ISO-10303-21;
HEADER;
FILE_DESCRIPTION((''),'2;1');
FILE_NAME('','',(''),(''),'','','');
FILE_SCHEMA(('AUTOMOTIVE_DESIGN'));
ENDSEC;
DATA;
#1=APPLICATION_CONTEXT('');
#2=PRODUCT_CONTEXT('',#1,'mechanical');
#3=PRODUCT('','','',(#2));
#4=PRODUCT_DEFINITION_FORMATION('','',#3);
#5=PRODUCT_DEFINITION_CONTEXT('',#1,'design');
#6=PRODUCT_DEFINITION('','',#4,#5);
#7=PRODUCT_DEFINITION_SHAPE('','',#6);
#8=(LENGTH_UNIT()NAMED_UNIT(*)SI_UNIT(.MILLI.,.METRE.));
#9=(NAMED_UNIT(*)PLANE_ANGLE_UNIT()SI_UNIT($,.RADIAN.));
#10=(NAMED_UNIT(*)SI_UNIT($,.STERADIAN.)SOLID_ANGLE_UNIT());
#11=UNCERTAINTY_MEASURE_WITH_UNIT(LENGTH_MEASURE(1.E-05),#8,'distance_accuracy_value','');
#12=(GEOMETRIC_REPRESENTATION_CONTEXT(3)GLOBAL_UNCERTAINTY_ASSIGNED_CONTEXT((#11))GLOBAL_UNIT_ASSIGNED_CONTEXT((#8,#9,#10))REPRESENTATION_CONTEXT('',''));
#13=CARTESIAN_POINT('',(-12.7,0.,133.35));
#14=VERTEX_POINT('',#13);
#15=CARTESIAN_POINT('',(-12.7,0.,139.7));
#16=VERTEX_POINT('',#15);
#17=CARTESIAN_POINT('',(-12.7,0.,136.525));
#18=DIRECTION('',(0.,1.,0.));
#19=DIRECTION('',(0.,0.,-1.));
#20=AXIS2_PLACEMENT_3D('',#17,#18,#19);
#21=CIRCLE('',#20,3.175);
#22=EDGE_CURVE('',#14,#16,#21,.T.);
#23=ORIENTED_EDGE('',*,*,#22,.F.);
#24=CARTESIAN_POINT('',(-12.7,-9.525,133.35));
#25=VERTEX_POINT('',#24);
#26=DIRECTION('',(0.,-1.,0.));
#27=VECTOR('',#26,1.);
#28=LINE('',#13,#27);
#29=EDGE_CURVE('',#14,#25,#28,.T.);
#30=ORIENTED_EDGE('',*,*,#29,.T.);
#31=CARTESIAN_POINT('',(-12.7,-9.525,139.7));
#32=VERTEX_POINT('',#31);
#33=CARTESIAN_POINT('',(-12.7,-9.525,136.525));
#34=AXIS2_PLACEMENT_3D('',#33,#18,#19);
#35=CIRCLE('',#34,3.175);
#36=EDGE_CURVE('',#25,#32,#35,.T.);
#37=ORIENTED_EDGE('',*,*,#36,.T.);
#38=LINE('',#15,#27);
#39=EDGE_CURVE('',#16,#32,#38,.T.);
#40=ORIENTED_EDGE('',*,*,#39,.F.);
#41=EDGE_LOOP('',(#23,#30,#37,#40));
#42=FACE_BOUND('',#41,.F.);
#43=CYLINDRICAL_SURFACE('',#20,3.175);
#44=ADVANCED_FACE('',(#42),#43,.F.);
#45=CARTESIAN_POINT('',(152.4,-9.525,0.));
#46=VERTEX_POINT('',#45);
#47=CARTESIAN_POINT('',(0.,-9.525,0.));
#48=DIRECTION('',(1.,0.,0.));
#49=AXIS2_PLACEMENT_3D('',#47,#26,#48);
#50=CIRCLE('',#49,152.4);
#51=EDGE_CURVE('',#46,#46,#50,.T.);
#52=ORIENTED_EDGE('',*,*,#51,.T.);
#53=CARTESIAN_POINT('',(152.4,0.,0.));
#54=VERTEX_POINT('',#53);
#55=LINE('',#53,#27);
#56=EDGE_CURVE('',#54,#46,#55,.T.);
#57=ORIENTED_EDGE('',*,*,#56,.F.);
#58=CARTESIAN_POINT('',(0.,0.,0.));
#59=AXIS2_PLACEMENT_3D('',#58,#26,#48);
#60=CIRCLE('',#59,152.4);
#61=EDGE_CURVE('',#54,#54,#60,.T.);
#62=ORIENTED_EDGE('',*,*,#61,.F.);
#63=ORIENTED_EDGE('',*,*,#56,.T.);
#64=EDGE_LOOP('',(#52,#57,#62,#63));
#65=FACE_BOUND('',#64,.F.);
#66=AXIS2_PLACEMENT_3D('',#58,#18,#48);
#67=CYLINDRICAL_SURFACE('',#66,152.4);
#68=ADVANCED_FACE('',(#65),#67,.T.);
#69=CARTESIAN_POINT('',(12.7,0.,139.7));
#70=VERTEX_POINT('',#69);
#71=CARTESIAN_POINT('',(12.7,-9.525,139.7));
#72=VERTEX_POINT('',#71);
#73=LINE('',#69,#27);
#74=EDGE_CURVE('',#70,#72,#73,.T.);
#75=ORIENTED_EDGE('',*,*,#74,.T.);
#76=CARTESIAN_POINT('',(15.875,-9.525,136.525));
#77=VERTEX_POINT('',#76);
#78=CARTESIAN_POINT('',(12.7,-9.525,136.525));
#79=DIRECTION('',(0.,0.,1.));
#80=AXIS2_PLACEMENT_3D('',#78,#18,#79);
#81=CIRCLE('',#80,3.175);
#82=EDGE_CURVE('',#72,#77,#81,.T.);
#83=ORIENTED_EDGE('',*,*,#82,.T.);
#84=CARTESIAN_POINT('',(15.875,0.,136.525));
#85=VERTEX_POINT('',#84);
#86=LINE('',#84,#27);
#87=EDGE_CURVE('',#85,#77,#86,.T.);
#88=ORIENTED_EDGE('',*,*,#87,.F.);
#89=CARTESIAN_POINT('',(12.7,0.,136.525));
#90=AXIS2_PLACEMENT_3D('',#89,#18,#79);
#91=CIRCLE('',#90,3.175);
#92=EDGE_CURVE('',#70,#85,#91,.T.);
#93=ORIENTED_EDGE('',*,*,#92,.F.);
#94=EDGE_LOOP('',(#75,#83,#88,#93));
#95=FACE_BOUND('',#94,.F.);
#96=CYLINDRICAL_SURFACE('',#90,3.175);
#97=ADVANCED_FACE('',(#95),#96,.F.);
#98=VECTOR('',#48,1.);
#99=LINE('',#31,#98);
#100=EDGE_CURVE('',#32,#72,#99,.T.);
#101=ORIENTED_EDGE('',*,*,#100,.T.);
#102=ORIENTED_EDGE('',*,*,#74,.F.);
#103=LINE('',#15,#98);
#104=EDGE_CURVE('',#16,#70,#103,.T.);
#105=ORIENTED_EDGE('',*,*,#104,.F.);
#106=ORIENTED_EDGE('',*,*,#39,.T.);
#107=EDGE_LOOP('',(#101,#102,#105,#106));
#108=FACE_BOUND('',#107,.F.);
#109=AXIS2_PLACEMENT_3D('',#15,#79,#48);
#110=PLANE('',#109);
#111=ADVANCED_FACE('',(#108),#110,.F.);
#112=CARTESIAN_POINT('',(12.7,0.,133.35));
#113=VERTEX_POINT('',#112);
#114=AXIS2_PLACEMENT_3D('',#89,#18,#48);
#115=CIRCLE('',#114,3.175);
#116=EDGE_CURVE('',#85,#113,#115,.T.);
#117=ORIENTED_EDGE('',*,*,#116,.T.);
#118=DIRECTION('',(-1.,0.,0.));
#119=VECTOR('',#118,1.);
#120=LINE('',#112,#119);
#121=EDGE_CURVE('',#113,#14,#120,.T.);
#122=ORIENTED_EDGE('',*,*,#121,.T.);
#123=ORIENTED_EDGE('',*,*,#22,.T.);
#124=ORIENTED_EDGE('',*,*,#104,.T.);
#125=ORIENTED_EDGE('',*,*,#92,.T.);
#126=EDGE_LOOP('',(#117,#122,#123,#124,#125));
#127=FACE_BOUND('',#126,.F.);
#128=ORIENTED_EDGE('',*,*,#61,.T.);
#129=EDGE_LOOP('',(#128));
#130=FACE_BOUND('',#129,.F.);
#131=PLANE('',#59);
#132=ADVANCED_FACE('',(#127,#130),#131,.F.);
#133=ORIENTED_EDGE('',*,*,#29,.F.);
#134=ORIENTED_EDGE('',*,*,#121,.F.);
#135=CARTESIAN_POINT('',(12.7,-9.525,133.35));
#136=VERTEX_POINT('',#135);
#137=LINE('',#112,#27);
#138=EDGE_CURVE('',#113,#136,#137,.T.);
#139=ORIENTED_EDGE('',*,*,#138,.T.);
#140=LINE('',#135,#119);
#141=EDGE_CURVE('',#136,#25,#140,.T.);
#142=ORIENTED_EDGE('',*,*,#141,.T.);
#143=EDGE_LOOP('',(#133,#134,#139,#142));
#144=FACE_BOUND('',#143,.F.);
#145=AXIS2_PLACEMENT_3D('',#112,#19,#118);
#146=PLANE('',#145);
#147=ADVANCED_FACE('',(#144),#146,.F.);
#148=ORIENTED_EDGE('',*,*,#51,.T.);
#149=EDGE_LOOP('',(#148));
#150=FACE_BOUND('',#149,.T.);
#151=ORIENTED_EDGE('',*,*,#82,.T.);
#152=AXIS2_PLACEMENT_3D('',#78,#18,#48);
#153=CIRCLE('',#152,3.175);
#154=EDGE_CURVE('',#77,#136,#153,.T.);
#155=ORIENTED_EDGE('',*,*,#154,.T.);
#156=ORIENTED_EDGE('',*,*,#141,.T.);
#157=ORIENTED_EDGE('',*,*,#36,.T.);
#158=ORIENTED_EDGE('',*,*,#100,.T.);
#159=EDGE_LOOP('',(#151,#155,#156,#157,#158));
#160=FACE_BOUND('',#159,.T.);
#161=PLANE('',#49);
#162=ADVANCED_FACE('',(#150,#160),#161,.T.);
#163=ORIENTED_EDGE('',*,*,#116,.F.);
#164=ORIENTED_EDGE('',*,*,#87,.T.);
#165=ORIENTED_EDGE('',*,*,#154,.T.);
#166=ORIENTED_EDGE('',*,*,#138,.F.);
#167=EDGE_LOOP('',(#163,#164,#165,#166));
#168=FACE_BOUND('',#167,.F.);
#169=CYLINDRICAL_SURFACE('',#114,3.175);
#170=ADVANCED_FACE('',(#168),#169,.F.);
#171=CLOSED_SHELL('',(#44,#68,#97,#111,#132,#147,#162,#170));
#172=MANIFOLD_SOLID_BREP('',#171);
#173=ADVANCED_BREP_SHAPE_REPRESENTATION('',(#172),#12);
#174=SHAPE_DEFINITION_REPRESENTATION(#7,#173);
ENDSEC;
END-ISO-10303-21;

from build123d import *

# Parameters (mm, degrees)
F1_DEPTH = 9.525


# Not quite as in the source:
# - a length typed as a fraction of an inch, garbled in the dataset ("3 / 203.2 mm" for 3/8 in), is restored


with BuildPart() as f1:
    # F0 (on Front) → F1 (new body)
    with BuildSketch(Plane.XZ):
        with BuildLine():
            ThreePointArc((0, 152.4), (-107.7630734528, -107.7630734528), (152.4, 0))
            ThreePointArc((152.4, 0), (107.7630734528, 107.7630734528), (0, 152.4))
        make_face()
        with BuildLine():
            Line((-12.7, 139.7), (0, 139.7))
            Line((0, 139.7), (12.7, 139.7))
            ThreePointArc((12.7, 139.7), (14.9450640303, 138.7700640303), (15.875, 136.525))
            ThreePointArc((15.875, 136.525), (14.9450640303, 134.2799359697), (12.7, 133.35))
            Line((12.7, 133.35), (0, 133.35))
            Line((0, 133.35), (-12.7, 133.35))
            ThreePointArc((-12.7, 133.35), (-15.875, 136.525), (-12.7, 139.7))
        make_face(mode=Mode.SUBTRACT)
    extrude(amount=F1_DEPTH)


solid = f1.part
